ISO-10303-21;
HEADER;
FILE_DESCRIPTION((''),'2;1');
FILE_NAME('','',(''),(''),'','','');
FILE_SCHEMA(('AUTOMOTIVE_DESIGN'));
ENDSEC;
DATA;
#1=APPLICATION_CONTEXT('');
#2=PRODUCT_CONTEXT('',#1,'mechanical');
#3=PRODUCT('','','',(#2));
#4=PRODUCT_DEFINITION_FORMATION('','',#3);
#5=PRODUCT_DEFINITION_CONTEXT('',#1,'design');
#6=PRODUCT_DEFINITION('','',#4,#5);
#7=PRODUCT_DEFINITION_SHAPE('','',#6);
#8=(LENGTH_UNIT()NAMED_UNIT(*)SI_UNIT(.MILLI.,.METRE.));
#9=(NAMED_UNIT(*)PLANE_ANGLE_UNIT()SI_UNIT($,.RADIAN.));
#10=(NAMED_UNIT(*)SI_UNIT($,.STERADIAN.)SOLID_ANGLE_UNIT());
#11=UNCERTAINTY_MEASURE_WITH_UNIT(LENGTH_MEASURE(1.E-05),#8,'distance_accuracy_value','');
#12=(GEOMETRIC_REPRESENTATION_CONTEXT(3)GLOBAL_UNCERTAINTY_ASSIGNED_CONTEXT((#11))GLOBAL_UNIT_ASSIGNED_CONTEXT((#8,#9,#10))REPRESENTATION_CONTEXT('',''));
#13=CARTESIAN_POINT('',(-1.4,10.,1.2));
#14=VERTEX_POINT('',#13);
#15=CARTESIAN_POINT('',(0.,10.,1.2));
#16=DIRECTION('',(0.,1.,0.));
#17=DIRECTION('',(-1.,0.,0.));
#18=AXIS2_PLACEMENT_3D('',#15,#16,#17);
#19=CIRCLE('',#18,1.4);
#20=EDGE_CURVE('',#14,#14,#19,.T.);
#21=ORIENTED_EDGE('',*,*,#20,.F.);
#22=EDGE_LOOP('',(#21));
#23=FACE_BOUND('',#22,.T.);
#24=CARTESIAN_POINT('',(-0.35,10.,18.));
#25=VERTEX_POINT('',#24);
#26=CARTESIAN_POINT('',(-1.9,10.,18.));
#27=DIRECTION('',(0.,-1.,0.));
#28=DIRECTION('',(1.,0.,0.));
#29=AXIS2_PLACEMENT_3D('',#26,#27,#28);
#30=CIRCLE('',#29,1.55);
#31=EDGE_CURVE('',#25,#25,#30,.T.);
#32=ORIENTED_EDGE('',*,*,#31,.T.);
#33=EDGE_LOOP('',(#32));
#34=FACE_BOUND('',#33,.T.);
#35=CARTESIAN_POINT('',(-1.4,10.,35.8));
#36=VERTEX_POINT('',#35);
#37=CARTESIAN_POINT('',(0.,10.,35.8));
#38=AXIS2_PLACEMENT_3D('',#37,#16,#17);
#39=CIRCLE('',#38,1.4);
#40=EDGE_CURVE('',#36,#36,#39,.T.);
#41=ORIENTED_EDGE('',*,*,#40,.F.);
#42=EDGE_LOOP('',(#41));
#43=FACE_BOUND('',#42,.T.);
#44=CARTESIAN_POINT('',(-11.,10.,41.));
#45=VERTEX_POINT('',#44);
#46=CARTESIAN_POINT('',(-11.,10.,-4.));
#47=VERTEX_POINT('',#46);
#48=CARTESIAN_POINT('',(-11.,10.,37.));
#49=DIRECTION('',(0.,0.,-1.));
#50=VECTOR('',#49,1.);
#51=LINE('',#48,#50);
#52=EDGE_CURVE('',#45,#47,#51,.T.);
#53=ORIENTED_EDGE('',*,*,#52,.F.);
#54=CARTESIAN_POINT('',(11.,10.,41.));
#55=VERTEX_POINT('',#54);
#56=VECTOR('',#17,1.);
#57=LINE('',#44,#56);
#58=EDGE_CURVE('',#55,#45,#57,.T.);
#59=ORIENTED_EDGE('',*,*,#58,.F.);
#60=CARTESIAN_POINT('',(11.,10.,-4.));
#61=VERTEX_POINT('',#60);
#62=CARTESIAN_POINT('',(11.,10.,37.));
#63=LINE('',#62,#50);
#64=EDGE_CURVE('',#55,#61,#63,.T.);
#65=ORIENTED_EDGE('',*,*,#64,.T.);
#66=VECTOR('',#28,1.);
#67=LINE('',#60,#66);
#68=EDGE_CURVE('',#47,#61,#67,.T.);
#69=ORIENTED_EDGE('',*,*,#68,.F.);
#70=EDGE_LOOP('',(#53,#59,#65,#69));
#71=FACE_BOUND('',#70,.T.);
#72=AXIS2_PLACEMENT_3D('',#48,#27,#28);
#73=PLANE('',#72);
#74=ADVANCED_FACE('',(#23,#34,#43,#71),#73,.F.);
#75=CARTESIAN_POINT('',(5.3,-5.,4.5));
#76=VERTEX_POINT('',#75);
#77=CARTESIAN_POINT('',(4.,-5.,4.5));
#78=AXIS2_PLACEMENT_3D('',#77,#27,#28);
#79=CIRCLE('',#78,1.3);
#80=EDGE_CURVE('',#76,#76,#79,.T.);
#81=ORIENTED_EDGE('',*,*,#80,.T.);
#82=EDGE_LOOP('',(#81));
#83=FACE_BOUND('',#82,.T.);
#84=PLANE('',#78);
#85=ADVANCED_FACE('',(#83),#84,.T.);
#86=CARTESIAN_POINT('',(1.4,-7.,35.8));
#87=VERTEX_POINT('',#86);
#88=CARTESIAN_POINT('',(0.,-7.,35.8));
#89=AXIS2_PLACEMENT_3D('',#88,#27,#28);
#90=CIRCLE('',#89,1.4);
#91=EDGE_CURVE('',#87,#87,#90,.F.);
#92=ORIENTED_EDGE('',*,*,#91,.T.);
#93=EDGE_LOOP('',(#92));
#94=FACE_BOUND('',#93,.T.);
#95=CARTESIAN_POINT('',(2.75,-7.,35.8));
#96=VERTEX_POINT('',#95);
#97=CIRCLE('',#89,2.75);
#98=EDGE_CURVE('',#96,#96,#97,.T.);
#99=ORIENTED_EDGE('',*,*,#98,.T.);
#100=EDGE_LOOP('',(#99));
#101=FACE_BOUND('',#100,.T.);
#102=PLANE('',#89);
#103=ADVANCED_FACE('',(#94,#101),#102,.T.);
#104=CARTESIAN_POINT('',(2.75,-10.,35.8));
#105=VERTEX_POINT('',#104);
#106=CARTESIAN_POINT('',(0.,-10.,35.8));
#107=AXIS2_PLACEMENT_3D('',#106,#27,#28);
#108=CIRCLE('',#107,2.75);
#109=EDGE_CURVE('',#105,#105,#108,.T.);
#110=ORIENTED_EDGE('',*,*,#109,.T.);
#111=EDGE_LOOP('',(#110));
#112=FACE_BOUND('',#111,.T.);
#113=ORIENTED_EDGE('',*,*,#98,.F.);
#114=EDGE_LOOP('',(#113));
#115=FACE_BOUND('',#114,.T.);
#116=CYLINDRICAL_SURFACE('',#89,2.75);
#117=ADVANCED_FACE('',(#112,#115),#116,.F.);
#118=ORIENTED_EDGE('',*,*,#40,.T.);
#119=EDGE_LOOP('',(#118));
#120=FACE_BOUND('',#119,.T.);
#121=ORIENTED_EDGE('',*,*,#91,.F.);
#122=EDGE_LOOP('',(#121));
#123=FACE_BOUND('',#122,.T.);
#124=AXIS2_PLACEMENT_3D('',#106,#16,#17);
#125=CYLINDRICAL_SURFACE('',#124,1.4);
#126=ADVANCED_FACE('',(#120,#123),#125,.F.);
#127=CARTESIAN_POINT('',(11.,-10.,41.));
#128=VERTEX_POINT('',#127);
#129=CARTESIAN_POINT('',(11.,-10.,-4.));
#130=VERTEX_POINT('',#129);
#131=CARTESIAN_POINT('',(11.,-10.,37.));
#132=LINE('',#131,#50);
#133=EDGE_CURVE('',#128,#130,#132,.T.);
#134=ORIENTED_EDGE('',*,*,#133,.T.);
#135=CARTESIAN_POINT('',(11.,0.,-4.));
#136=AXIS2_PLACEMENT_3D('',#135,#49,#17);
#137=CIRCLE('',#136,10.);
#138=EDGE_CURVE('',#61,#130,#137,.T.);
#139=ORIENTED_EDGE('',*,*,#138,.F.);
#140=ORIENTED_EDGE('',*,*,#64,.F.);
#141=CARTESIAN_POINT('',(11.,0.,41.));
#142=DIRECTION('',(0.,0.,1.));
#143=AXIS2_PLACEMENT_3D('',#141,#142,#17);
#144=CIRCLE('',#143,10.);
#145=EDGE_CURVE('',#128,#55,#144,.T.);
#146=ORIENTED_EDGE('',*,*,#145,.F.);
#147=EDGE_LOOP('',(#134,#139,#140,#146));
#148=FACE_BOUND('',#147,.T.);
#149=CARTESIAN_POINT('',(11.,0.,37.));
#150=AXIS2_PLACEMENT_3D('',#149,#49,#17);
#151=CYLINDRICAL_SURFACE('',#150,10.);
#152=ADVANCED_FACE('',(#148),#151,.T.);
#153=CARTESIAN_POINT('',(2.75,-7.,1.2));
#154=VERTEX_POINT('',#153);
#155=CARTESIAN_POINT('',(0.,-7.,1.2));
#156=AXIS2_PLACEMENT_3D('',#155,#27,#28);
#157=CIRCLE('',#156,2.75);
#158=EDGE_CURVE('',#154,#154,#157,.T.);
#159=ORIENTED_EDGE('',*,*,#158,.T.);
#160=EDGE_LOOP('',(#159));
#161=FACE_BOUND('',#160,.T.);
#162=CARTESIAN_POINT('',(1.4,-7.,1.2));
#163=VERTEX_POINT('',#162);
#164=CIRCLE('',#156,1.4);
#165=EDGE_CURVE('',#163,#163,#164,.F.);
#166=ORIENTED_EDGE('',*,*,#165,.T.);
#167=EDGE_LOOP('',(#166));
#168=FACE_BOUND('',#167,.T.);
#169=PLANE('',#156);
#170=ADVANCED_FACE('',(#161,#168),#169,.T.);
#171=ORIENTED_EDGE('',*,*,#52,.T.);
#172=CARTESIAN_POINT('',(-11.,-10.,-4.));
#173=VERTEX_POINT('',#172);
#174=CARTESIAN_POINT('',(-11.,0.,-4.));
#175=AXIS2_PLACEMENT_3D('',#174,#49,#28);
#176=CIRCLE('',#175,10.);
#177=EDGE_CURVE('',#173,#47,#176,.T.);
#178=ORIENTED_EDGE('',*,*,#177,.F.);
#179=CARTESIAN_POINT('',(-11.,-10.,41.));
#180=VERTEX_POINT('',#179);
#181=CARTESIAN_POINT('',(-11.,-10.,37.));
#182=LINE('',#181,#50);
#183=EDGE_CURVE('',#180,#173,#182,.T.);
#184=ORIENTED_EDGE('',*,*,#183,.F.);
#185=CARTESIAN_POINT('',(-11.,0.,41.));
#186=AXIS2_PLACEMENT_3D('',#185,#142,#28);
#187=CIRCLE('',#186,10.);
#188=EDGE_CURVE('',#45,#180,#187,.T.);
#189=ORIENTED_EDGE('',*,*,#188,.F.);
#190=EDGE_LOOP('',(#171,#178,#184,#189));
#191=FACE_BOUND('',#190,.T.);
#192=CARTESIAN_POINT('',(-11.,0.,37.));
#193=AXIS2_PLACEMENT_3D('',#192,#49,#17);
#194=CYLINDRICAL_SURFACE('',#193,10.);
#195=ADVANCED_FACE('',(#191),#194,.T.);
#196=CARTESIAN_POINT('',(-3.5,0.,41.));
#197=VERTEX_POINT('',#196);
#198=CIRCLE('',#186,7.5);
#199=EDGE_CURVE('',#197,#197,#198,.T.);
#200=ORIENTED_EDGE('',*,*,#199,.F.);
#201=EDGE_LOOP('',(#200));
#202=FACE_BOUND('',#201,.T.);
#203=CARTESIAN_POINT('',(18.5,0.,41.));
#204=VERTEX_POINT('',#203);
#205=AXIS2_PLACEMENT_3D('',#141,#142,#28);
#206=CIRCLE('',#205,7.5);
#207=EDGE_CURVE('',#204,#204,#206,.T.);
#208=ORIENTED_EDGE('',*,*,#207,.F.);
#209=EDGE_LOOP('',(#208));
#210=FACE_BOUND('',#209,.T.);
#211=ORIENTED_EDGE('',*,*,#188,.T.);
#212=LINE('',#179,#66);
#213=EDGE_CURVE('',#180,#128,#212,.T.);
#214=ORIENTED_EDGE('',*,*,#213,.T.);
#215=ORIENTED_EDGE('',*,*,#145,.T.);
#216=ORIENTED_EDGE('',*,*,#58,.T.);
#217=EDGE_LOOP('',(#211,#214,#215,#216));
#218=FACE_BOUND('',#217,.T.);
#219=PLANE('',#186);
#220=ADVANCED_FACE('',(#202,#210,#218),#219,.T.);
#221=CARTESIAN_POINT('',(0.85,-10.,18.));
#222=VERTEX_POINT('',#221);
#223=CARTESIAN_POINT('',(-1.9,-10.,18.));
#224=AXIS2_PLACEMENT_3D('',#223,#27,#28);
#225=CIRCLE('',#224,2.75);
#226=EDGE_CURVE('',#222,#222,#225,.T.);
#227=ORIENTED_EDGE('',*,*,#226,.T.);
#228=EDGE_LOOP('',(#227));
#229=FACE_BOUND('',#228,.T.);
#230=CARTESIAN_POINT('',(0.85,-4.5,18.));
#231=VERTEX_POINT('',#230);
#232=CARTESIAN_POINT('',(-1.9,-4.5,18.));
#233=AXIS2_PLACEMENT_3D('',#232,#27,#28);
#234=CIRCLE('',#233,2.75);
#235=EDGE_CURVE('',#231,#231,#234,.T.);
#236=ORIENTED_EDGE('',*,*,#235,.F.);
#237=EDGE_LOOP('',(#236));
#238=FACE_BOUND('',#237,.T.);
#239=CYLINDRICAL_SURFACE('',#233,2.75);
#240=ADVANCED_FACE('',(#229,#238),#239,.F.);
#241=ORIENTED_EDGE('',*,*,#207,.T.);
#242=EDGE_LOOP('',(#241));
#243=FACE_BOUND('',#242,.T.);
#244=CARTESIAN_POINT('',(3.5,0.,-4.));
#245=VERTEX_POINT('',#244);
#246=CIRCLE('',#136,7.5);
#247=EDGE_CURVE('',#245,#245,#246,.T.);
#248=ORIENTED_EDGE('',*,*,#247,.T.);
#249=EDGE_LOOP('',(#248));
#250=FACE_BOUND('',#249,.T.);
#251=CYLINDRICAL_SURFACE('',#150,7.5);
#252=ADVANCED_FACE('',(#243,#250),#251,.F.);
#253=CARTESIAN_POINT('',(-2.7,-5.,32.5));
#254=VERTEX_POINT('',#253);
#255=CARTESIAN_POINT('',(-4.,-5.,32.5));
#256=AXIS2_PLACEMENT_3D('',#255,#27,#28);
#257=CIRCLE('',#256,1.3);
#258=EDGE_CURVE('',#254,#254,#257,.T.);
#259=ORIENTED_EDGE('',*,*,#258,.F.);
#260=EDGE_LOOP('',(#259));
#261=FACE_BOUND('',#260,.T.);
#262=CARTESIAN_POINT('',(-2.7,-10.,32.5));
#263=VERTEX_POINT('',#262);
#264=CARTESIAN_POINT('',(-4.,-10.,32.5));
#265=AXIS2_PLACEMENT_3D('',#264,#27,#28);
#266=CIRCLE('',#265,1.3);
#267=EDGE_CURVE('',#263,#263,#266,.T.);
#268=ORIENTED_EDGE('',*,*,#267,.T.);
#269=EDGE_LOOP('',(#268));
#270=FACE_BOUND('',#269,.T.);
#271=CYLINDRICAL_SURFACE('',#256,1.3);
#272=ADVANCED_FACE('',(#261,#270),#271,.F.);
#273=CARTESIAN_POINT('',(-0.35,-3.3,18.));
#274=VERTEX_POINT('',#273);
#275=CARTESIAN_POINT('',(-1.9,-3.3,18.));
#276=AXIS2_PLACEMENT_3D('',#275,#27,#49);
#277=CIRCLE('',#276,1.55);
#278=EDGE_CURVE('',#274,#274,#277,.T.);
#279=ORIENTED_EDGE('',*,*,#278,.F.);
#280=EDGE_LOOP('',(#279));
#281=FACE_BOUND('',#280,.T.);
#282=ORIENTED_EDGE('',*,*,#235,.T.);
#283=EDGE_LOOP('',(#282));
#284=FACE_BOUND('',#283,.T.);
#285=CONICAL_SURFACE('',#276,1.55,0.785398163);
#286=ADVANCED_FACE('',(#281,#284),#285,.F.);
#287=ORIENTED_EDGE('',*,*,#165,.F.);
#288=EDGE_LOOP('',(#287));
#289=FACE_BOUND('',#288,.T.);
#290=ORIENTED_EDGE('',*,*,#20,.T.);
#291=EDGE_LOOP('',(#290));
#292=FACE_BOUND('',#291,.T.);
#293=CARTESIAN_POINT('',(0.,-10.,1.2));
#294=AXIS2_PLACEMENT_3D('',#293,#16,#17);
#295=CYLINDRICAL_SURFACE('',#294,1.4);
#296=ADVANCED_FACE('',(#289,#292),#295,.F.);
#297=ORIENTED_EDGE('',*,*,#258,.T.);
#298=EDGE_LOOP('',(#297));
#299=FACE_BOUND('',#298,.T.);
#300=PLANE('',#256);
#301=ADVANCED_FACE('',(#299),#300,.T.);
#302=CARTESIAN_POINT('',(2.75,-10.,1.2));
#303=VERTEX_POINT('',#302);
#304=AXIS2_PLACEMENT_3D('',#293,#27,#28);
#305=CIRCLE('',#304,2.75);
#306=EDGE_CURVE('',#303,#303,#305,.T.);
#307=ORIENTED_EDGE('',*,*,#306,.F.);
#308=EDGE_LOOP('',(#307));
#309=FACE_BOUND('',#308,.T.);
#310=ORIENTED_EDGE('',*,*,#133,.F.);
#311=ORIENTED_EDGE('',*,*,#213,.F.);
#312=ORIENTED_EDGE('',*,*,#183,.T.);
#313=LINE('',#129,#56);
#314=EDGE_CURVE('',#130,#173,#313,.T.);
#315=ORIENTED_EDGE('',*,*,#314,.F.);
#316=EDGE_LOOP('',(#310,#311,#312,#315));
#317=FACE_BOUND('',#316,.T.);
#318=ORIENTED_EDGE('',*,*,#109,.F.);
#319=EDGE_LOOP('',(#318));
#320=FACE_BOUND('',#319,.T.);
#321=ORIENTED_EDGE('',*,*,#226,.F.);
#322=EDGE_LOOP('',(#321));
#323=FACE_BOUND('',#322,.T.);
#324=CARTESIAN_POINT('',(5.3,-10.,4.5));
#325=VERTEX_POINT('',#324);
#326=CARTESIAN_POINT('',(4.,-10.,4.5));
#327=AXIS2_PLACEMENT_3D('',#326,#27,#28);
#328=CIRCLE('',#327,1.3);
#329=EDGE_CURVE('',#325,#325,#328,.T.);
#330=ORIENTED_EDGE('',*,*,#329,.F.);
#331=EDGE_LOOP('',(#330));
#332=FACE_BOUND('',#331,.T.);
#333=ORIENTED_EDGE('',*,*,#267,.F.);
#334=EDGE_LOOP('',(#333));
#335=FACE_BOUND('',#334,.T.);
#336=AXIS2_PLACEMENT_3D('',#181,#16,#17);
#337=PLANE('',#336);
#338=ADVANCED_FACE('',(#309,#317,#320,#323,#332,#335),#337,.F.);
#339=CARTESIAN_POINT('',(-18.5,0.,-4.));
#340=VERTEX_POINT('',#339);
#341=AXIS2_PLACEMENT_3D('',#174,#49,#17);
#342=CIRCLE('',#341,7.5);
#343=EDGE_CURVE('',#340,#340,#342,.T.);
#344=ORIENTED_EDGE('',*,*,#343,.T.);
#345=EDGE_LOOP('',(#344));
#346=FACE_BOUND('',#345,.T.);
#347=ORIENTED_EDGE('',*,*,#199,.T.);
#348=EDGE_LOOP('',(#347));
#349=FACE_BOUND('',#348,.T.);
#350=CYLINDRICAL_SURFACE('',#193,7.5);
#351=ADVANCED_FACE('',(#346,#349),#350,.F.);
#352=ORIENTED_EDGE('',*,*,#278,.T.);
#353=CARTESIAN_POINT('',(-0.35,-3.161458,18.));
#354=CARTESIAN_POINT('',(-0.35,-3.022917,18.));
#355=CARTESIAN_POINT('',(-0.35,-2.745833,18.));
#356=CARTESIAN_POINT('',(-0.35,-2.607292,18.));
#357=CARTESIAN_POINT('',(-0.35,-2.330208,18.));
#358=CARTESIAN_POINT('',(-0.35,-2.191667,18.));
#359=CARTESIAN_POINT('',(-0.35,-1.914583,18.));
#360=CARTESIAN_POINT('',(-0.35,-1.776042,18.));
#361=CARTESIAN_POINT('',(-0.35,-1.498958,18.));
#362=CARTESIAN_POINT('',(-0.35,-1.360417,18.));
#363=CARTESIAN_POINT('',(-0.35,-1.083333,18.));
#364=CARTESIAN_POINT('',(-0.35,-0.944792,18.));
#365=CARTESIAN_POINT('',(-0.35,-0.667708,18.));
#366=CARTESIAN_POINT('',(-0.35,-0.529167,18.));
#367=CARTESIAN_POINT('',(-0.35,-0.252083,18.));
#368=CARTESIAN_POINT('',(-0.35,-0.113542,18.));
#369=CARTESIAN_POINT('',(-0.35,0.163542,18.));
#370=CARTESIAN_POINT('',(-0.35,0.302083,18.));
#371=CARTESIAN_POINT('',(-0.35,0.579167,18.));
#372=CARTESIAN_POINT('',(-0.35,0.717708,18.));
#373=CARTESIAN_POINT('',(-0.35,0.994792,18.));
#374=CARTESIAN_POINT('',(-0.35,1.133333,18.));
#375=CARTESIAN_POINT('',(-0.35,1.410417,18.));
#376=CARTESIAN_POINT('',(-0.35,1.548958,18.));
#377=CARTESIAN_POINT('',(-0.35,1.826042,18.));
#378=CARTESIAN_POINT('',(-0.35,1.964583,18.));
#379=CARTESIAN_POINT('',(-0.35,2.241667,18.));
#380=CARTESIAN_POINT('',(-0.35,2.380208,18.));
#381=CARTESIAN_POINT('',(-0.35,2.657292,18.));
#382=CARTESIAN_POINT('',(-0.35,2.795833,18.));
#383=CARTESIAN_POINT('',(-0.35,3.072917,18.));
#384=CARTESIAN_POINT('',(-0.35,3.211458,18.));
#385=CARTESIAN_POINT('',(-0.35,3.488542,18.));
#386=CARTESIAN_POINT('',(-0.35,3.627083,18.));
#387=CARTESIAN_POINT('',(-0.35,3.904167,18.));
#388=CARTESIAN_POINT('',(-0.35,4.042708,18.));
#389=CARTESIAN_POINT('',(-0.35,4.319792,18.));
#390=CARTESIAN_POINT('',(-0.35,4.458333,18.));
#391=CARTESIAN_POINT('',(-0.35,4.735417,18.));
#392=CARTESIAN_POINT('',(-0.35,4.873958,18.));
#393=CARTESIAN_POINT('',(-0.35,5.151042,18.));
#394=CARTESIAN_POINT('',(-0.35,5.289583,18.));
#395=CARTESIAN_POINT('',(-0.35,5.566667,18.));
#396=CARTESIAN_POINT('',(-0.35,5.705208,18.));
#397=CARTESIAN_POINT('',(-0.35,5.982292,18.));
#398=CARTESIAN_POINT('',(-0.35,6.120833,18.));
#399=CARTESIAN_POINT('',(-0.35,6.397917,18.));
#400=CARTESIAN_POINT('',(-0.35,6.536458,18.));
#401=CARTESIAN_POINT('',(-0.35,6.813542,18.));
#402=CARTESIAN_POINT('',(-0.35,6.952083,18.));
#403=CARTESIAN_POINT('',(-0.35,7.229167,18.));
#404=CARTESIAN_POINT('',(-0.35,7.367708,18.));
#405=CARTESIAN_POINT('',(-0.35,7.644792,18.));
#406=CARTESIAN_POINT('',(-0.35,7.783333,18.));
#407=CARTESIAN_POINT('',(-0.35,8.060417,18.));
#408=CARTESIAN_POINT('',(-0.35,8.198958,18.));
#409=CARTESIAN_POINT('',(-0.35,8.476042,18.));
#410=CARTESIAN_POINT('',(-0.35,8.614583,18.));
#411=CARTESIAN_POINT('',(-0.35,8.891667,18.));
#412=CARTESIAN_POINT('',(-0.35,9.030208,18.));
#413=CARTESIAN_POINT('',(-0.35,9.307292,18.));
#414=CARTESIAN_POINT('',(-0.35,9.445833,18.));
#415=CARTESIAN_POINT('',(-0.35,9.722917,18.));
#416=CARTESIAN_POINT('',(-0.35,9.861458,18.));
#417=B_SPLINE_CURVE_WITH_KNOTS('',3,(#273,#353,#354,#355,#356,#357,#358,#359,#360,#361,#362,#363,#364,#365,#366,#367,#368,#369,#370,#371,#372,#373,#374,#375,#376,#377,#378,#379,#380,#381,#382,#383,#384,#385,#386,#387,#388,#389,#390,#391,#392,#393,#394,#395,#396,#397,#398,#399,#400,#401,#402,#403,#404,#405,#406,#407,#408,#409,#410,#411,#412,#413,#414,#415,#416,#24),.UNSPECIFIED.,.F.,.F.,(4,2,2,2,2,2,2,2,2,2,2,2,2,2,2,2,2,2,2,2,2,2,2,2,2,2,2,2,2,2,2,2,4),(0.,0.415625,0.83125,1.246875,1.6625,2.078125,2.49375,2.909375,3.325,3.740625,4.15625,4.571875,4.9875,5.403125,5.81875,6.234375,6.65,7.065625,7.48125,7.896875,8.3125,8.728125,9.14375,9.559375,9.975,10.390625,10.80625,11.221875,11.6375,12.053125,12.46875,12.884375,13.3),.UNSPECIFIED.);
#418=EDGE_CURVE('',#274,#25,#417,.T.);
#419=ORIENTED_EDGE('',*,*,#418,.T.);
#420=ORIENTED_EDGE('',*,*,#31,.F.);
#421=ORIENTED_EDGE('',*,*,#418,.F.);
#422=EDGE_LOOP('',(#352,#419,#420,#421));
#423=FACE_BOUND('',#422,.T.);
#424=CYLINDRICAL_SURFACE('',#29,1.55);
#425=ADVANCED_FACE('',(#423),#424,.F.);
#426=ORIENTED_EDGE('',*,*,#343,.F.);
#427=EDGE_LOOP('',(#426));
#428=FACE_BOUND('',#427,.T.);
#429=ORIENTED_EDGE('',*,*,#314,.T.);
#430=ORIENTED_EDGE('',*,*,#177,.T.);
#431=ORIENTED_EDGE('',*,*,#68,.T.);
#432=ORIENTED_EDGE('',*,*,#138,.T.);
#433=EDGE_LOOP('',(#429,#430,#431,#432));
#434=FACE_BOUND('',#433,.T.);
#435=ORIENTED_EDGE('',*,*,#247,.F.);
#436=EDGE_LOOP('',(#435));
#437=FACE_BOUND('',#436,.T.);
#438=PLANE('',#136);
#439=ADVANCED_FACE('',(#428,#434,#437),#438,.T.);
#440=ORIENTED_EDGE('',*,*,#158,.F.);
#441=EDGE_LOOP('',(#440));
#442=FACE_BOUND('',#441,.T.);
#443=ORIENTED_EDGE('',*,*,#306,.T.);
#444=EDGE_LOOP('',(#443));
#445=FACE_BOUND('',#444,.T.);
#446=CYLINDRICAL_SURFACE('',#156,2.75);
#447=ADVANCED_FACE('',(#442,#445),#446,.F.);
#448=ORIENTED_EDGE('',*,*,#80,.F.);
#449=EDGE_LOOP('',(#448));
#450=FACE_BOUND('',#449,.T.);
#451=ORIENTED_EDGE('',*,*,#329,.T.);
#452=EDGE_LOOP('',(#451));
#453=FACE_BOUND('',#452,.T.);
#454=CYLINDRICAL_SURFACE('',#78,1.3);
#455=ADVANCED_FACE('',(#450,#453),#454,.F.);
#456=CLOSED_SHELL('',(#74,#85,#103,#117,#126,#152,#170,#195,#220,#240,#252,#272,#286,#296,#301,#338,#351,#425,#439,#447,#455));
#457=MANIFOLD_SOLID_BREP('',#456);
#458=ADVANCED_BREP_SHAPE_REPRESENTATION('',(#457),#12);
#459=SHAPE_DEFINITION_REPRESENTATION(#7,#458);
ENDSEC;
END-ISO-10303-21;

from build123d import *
from build123d.topology import SkipClean

# Parameters (mm, degrees)
SKETCH_1_R           = 7.5
EXTRUDE_1_DEPTH      = 37
SKETCH_6_R           = 2.75
CUT_EXTRUDE_3_DEPTH  = 5.5
SKETCH_8_R           = 1.55
CUT_EXTRUDE_6_DEPTH  = 45.947191236
CHAMFER_1_SIZE       = 1.2
SKETCH_12_R          = 1.3
CUT_EXTRUDE_8_DEPTH  = 5
SKETCH_17_R          = 7.5
EXTRUDE_5_DEPTH      = 4
EXTRUDE_START        = 4
SKETCH_18_R          = 7.5
EXTRUDE_6_DEPTH      = 4
SKETCH_19_R          = 1.4
CUT_EXTRUDE_12_DEPTH = 51.219518118
SKETCH_20_R          = 2.75
CUT_EXTRUDE_14_DEPTH = 3


with BuildPart() as part:
    # Эскиз1 → Бобышка-Вытянуть1 (new body)
    with BuildSketch(Plane.XY):
        with BuildLine():
            Line((-11, 10), (11, 10))
            ThreePointArc((11, 10), (21, 0), (11, -10))
            Line((11, -10), (-11, -10))
            ThreePointArc((-11, -10), (-21, 0), (-11, 10))
        make_face()
        with Locations((-11, 0)):
            Circle(SKETCH_1_R, mode=Mode.SUBTRACT)
        with Locations((11, 0)):
            Circle(SKETCH_1_R, mode=Mode.SUBTRACT)
    extrude(amount=EXTRUDE_1_DEPTH)

    # Эскиз6 → Вырез-Вытянуть3 (cut)
    with BuildSketch(Plane.XZ.offset(10)):
        with Locations((-1.9, 18)):
            Circle(SKETCH_6_R)
    extrude(amount=-CUT_EXTRUDE_3_DEPTH, mode=Mode.SUBTRACT)

    # Эскиз8 → Вырез-Вытянуть6 (cut, through all)
    with BuildSketch(Plane.XZ.offset(4.5)):
        with Locations((-1.9, 18)):
            Circle(SKETCH_8_R)
    extrude(amount=-CUT_EXTRUDE_6_DEPTH, mode=Mode.SUBTRACT)

    # Фаска1
    chamfer_1_edges = [part.edges().sort_by_distance(p)[0] for p in [
        (-3.45, -4.5, 18),
    ]]
    chamfer(chamfer_1_edges, length=CHAMFER_1_SIZE - 0.0001)  # a hair under: the kernel refuses the full size

    # Эскиз12 → Вырез-Вытянуть8 (cut)
    with BuildSketch(Plane.XZ.offset(10)):
        with Locations((-4, 32.5)):
            Circle(SKETCH_12_R)
        with Locations((4, 4.5)):
            Circle(SKETCH_12_R)
    extrude(amount=-CUT_EXTRUDE_8_DEPTH, mode=Mode.SUBTRACT)

    # Эскиз17 → Бобышка-Вытянуть5 (add)
    with BuildSketch(Plane.XY.offset(37)):
        with BuildLine():
            Line((-11, 10), (11, 10))
            ThreePointArc((11, 10), (21, 0), (11, -10))
            Line((11, -10), (-11, -10))
            ThreePointArc((-11, -10), (-21, 0), (-11, 10))
        make_face()
        with Locations((-11, 0)):
            Circle(SKETCH_17_R, mode=Mode.SUBTRACT)
        with Locations((11, 0)):
            Circle(SKETCH_17_R, mode=Mode.SUBTRACT)
    extrude(amount=EXTRUDE_5_DEPTH)

    # Эскиз18 → Бобышка-Вытянуть6 (add)
    with SkipClean():  # the faces are left unmerged after this step: merging them gives an invalid solid
        with BuildSketch(Plane(origin=(0, 0, 0), x_dir=(-1, 0, 0), z_dir=(0, 0, -1)).offset(EXTRUDE_START)):
            with BuildLine():
                Line((-11, 10), (11, 10))
                ThreePointArc((11, 10), (21, 0), (11, -10))
                Line((11, -10), (-11, -10))
                ThreePointArc((-11, -10), (-21, 0), (-11, 10))
            make_face()
            with Locations((-11, 0)):
                Circle(SKETCH_18_R, mode=Mode.SUBTRACT)
            with Locations((11, 0)):
                Circle(SKETCH_18_R, mode=Mode.SUBTRACT)
        extrude(amount=-EXTRUDE_6_DEPTH)

    # Эскиз19 → Вырез-Вытянуть12 (cut, through all)
    with SkipClean():  # the faces are left unmerged after this step: merging them gives an invalid solid
        with BuildSketch(Plane(origin=(0, 10, 0), x_dir=(1, 0, 0), z_dir=(0, 1, 0))):
            with Locations(Location((0, -1.2, 0), (0, 0, 180))):
                Circle(SKETCH_19_R)
            with Locations(Location((0, -35.8, 0), (0, 0, 180))):
                Circle(SKETCH_19_R)
        extrude(amount=-CUT_EXTRUDE_12_DEPTH, mode=Mode.SUBTRACT)

    # Эскиз20 → Вырез-Вытянуть14 (cut)
    with SkipClean():  # the faces are left unmerged after this step: merging them gives an invalid solid
        with BuildSketch(Plane(origin=(0, -10, 0), x_dir=(-1, 0, 0), z_dir=(0, -1, 0))):
            with Locations(Location((0, -35.8, 0), (0, 0, 180))):
                Circle(SKETCH_20_R)
            with Locations(Location((0, -1.2, 0), (0, 0, 180))):
                Circle(SKETCH_20_R)
        extrude(amount=-CUT_EXTRUDE_14_DEPTH, mode=Mode.SUBTRACT)


solid = part.part
